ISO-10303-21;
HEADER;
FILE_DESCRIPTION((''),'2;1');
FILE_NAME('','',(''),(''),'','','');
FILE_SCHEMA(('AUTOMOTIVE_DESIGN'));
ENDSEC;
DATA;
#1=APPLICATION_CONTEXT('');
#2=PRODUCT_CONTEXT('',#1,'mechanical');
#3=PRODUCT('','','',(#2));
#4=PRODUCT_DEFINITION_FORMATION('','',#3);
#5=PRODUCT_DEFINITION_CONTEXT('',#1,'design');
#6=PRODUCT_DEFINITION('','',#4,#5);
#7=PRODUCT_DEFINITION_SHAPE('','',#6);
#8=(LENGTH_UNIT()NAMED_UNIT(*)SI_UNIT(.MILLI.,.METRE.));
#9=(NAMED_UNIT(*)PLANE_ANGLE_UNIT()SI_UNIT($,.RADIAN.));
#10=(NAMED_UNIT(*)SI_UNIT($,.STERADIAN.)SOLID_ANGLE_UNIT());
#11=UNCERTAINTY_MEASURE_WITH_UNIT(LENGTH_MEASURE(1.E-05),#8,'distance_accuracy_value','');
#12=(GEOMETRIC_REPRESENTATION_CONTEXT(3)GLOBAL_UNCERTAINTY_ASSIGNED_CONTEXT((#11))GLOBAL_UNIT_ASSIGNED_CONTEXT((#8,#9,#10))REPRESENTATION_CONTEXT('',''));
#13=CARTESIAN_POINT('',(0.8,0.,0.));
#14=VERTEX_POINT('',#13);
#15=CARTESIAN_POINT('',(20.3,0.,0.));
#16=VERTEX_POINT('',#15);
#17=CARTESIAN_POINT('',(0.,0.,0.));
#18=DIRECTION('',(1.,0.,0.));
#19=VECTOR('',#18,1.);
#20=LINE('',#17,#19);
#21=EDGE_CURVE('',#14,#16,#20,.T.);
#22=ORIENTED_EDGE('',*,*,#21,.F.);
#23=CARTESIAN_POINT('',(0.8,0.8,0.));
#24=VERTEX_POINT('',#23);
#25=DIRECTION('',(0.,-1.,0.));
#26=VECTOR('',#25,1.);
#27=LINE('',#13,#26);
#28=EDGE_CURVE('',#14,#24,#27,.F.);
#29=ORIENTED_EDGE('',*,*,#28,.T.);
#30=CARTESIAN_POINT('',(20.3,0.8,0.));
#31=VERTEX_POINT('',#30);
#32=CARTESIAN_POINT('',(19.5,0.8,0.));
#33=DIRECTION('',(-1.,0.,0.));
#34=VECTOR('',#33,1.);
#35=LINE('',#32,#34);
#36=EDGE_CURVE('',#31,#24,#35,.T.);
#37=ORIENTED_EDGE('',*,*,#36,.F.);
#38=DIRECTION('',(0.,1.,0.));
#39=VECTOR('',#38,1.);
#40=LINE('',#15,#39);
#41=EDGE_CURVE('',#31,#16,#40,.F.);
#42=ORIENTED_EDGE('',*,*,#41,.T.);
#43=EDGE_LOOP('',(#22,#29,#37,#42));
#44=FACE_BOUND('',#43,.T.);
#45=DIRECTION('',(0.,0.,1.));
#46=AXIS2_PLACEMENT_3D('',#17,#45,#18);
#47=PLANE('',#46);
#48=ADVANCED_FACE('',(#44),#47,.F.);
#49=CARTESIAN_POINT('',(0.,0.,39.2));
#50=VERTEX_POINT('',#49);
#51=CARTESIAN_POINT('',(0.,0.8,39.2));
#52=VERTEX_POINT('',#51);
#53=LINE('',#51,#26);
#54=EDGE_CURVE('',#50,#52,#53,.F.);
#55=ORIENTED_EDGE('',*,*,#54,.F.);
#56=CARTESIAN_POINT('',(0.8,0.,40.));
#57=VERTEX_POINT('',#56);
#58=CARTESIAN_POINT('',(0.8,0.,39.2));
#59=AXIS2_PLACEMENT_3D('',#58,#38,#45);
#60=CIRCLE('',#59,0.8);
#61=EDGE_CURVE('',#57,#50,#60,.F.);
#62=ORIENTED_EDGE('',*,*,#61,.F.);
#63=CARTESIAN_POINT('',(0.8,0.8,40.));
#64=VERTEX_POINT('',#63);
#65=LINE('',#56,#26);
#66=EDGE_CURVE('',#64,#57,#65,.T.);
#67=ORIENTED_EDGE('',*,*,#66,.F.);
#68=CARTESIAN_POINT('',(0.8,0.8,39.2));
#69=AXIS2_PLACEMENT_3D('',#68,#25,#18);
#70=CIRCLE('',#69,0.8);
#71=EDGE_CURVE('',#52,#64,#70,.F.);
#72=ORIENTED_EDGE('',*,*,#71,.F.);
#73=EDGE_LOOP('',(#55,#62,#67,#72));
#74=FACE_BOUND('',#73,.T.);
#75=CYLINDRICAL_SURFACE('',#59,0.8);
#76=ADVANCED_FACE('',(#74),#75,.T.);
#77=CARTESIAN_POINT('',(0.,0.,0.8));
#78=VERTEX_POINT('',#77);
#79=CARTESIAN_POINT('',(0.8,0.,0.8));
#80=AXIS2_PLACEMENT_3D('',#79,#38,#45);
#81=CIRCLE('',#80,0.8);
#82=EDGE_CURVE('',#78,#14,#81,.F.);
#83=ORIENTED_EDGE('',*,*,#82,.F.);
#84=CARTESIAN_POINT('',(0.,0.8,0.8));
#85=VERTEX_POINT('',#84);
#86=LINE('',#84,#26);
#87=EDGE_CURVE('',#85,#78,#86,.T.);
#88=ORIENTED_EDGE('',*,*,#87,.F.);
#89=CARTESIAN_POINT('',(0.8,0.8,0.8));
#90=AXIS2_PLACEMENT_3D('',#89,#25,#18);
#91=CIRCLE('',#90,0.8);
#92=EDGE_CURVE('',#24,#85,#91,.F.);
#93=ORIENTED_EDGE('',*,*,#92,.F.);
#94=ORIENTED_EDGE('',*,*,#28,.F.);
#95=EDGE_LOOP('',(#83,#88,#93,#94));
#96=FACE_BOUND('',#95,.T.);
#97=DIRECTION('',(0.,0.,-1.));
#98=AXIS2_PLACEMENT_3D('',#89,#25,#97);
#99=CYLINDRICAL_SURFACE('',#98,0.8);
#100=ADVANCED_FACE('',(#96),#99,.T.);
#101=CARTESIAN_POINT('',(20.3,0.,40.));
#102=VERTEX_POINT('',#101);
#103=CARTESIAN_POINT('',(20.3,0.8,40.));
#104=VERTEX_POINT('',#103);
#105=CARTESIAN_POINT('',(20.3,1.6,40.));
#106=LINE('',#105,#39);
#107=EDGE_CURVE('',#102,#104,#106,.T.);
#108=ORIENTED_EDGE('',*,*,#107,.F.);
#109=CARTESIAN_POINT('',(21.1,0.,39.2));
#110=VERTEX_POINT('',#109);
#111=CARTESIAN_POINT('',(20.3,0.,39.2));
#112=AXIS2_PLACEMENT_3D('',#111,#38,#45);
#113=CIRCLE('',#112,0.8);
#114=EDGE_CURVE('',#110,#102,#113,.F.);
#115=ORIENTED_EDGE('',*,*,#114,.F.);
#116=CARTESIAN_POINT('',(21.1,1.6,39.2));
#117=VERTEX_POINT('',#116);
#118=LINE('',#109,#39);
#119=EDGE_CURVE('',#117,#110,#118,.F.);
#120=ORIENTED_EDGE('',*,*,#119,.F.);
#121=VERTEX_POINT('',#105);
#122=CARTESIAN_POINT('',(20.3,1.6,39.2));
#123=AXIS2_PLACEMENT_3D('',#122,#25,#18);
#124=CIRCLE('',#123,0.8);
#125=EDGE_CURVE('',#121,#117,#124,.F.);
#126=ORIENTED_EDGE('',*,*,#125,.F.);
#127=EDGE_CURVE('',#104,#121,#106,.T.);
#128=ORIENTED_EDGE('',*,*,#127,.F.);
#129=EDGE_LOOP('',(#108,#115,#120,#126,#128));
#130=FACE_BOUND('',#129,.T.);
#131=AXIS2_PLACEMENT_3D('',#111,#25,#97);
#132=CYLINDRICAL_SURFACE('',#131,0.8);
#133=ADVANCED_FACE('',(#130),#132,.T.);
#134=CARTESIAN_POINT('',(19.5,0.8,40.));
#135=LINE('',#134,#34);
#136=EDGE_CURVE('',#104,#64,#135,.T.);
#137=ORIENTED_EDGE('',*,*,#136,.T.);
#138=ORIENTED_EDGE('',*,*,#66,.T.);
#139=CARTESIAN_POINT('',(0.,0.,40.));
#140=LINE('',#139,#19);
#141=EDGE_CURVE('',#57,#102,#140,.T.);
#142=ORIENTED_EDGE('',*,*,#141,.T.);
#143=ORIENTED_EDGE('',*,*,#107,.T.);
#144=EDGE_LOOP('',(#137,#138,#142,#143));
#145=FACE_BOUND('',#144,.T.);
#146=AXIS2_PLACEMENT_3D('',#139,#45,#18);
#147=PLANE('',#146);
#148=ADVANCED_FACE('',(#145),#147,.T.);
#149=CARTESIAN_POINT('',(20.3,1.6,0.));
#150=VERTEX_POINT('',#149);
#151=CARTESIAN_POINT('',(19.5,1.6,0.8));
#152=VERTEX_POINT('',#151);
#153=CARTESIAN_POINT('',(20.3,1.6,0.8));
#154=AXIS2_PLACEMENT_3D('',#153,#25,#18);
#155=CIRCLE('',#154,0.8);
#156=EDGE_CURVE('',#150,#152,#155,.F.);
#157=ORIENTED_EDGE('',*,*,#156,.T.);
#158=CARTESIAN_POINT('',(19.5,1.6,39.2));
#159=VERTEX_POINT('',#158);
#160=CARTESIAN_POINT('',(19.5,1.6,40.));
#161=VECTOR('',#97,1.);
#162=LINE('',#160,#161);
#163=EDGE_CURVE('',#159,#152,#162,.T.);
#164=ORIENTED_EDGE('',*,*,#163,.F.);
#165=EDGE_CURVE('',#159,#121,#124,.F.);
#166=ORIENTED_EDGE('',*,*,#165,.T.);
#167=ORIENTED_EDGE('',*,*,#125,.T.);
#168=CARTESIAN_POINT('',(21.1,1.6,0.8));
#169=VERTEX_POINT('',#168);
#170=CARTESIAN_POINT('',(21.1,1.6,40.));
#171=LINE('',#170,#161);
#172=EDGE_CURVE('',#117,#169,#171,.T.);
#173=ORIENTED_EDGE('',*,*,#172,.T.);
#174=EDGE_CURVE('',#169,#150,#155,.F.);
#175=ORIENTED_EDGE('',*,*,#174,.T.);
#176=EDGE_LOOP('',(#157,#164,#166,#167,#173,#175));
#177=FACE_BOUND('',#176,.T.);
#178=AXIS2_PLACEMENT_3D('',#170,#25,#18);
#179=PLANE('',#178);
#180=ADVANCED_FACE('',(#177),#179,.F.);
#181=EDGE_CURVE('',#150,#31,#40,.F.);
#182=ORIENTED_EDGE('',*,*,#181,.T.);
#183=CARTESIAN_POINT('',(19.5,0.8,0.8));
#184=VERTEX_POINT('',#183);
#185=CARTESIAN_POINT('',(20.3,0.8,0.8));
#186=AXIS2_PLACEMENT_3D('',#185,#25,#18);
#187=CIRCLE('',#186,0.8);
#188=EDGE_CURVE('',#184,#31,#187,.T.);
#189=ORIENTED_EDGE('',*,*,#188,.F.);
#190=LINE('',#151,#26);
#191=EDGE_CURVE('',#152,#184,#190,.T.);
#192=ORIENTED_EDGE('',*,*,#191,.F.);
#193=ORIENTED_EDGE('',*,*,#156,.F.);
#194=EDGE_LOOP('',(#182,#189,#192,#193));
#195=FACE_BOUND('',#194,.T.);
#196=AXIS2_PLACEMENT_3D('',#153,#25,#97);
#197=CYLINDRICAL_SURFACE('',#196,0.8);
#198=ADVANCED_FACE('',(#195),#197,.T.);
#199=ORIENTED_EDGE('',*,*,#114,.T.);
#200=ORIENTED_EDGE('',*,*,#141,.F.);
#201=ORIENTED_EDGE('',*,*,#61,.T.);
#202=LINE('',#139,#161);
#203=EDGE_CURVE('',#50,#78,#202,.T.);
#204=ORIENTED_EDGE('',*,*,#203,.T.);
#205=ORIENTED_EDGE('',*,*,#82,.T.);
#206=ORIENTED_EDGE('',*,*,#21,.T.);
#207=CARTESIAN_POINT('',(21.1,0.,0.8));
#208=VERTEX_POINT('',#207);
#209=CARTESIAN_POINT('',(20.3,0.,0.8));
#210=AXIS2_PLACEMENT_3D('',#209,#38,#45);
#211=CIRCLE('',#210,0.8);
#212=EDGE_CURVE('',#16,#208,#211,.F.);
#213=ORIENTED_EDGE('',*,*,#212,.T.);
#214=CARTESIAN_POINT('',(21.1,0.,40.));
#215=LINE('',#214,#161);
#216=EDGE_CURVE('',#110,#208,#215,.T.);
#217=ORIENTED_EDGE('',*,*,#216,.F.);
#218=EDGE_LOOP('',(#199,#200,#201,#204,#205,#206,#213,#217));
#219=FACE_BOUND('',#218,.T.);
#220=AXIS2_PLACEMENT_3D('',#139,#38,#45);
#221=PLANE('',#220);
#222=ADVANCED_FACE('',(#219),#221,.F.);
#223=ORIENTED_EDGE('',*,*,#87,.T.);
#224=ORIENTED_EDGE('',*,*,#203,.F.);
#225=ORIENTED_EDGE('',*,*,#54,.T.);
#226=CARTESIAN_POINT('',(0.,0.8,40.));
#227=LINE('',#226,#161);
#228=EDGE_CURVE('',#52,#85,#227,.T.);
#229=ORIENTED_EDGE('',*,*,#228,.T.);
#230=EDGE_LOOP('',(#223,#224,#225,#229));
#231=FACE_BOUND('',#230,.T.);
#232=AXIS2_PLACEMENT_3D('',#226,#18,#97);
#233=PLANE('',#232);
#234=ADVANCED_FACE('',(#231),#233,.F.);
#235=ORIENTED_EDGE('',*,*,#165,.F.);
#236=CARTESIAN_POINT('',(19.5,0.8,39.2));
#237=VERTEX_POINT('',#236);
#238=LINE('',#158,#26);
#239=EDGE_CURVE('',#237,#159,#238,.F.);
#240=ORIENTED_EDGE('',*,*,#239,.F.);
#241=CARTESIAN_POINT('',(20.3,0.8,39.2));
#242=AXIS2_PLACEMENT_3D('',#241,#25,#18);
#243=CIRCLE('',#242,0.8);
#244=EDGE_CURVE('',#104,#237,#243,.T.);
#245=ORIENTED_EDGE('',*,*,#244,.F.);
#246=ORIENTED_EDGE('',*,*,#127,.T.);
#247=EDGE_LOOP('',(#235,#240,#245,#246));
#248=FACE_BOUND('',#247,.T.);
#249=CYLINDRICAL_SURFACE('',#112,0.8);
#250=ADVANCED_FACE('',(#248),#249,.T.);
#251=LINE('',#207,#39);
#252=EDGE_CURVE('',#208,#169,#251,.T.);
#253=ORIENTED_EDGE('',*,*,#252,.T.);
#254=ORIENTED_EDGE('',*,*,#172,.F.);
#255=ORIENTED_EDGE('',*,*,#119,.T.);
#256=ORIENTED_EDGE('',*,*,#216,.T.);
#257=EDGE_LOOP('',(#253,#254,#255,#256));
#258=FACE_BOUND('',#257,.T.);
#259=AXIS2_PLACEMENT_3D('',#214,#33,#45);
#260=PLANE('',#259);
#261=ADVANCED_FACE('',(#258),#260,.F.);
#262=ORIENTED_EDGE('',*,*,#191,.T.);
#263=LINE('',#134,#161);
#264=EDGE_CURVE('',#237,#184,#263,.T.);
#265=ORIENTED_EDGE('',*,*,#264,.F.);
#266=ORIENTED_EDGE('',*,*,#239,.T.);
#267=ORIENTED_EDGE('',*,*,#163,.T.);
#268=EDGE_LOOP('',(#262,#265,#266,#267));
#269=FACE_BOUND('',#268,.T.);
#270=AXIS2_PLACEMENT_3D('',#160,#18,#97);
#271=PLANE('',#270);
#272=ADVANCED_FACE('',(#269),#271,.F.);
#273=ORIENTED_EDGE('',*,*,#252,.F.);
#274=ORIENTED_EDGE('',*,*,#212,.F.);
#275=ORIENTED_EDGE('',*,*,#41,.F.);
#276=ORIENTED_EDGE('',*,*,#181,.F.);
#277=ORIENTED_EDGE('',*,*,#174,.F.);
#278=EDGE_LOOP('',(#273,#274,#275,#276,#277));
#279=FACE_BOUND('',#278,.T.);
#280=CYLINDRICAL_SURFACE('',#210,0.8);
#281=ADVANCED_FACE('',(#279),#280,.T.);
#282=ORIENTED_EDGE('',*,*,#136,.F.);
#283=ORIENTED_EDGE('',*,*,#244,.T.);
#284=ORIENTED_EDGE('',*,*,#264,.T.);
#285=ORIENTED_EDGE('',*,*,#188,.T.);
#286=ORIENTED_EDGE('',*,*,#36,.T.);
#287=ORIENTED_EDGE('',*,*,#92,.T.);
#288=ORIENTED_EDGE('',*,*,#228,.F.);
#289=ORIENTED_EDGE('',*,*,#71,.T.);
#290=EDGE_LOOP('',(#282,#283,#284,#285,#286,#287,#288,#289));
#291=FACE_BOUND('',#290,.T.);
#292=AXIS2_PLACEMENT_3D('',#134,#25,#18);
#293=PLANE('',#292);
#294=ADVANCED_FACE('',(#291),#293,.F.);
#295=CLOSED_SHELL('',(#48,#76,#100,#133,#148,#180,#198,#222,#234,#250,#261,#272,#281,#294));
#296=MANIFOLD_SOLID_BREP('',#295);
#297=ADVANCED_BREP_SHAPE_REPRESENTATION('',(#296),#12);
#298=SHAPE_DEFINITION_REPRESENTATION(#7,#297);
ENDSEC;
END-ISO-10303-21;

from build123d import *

# Parameters (mm, degrees)
BOSS_EXTRUDE1_DEPTH = 40
FILLET1_R           = 0.8


with BuildPart() as part:
    # Sketch1 → Boss-Extrude1 (new body)
    with BuildSketch(Plane.XY):
        Polygon((0, 0), (21.1, 0), (21.1, 1.6), (19.5, 1.6), (19.5, 0.8), (0, 0.8), align=None)
    extrude(amount=BOSS_EXTRUDE1_DEPTH)

    # Fillet1
    fillet1_edges = [part.edges().sort_by_distance(p)[0] for p in [
        (19.5, 1.2, 0),
        (0, 0.4, 0),
        (21.1, 0.8, 0),
        (19.5, 1.2, 40),
        (21.1, 0.8, 40),
        (0, 0.4, 40),
    ]]
    fillet(fillet1_edges, radius=FILLET1_R - 0.0001)  # a hair under: the kernel refuses the full size


solid = part.part
